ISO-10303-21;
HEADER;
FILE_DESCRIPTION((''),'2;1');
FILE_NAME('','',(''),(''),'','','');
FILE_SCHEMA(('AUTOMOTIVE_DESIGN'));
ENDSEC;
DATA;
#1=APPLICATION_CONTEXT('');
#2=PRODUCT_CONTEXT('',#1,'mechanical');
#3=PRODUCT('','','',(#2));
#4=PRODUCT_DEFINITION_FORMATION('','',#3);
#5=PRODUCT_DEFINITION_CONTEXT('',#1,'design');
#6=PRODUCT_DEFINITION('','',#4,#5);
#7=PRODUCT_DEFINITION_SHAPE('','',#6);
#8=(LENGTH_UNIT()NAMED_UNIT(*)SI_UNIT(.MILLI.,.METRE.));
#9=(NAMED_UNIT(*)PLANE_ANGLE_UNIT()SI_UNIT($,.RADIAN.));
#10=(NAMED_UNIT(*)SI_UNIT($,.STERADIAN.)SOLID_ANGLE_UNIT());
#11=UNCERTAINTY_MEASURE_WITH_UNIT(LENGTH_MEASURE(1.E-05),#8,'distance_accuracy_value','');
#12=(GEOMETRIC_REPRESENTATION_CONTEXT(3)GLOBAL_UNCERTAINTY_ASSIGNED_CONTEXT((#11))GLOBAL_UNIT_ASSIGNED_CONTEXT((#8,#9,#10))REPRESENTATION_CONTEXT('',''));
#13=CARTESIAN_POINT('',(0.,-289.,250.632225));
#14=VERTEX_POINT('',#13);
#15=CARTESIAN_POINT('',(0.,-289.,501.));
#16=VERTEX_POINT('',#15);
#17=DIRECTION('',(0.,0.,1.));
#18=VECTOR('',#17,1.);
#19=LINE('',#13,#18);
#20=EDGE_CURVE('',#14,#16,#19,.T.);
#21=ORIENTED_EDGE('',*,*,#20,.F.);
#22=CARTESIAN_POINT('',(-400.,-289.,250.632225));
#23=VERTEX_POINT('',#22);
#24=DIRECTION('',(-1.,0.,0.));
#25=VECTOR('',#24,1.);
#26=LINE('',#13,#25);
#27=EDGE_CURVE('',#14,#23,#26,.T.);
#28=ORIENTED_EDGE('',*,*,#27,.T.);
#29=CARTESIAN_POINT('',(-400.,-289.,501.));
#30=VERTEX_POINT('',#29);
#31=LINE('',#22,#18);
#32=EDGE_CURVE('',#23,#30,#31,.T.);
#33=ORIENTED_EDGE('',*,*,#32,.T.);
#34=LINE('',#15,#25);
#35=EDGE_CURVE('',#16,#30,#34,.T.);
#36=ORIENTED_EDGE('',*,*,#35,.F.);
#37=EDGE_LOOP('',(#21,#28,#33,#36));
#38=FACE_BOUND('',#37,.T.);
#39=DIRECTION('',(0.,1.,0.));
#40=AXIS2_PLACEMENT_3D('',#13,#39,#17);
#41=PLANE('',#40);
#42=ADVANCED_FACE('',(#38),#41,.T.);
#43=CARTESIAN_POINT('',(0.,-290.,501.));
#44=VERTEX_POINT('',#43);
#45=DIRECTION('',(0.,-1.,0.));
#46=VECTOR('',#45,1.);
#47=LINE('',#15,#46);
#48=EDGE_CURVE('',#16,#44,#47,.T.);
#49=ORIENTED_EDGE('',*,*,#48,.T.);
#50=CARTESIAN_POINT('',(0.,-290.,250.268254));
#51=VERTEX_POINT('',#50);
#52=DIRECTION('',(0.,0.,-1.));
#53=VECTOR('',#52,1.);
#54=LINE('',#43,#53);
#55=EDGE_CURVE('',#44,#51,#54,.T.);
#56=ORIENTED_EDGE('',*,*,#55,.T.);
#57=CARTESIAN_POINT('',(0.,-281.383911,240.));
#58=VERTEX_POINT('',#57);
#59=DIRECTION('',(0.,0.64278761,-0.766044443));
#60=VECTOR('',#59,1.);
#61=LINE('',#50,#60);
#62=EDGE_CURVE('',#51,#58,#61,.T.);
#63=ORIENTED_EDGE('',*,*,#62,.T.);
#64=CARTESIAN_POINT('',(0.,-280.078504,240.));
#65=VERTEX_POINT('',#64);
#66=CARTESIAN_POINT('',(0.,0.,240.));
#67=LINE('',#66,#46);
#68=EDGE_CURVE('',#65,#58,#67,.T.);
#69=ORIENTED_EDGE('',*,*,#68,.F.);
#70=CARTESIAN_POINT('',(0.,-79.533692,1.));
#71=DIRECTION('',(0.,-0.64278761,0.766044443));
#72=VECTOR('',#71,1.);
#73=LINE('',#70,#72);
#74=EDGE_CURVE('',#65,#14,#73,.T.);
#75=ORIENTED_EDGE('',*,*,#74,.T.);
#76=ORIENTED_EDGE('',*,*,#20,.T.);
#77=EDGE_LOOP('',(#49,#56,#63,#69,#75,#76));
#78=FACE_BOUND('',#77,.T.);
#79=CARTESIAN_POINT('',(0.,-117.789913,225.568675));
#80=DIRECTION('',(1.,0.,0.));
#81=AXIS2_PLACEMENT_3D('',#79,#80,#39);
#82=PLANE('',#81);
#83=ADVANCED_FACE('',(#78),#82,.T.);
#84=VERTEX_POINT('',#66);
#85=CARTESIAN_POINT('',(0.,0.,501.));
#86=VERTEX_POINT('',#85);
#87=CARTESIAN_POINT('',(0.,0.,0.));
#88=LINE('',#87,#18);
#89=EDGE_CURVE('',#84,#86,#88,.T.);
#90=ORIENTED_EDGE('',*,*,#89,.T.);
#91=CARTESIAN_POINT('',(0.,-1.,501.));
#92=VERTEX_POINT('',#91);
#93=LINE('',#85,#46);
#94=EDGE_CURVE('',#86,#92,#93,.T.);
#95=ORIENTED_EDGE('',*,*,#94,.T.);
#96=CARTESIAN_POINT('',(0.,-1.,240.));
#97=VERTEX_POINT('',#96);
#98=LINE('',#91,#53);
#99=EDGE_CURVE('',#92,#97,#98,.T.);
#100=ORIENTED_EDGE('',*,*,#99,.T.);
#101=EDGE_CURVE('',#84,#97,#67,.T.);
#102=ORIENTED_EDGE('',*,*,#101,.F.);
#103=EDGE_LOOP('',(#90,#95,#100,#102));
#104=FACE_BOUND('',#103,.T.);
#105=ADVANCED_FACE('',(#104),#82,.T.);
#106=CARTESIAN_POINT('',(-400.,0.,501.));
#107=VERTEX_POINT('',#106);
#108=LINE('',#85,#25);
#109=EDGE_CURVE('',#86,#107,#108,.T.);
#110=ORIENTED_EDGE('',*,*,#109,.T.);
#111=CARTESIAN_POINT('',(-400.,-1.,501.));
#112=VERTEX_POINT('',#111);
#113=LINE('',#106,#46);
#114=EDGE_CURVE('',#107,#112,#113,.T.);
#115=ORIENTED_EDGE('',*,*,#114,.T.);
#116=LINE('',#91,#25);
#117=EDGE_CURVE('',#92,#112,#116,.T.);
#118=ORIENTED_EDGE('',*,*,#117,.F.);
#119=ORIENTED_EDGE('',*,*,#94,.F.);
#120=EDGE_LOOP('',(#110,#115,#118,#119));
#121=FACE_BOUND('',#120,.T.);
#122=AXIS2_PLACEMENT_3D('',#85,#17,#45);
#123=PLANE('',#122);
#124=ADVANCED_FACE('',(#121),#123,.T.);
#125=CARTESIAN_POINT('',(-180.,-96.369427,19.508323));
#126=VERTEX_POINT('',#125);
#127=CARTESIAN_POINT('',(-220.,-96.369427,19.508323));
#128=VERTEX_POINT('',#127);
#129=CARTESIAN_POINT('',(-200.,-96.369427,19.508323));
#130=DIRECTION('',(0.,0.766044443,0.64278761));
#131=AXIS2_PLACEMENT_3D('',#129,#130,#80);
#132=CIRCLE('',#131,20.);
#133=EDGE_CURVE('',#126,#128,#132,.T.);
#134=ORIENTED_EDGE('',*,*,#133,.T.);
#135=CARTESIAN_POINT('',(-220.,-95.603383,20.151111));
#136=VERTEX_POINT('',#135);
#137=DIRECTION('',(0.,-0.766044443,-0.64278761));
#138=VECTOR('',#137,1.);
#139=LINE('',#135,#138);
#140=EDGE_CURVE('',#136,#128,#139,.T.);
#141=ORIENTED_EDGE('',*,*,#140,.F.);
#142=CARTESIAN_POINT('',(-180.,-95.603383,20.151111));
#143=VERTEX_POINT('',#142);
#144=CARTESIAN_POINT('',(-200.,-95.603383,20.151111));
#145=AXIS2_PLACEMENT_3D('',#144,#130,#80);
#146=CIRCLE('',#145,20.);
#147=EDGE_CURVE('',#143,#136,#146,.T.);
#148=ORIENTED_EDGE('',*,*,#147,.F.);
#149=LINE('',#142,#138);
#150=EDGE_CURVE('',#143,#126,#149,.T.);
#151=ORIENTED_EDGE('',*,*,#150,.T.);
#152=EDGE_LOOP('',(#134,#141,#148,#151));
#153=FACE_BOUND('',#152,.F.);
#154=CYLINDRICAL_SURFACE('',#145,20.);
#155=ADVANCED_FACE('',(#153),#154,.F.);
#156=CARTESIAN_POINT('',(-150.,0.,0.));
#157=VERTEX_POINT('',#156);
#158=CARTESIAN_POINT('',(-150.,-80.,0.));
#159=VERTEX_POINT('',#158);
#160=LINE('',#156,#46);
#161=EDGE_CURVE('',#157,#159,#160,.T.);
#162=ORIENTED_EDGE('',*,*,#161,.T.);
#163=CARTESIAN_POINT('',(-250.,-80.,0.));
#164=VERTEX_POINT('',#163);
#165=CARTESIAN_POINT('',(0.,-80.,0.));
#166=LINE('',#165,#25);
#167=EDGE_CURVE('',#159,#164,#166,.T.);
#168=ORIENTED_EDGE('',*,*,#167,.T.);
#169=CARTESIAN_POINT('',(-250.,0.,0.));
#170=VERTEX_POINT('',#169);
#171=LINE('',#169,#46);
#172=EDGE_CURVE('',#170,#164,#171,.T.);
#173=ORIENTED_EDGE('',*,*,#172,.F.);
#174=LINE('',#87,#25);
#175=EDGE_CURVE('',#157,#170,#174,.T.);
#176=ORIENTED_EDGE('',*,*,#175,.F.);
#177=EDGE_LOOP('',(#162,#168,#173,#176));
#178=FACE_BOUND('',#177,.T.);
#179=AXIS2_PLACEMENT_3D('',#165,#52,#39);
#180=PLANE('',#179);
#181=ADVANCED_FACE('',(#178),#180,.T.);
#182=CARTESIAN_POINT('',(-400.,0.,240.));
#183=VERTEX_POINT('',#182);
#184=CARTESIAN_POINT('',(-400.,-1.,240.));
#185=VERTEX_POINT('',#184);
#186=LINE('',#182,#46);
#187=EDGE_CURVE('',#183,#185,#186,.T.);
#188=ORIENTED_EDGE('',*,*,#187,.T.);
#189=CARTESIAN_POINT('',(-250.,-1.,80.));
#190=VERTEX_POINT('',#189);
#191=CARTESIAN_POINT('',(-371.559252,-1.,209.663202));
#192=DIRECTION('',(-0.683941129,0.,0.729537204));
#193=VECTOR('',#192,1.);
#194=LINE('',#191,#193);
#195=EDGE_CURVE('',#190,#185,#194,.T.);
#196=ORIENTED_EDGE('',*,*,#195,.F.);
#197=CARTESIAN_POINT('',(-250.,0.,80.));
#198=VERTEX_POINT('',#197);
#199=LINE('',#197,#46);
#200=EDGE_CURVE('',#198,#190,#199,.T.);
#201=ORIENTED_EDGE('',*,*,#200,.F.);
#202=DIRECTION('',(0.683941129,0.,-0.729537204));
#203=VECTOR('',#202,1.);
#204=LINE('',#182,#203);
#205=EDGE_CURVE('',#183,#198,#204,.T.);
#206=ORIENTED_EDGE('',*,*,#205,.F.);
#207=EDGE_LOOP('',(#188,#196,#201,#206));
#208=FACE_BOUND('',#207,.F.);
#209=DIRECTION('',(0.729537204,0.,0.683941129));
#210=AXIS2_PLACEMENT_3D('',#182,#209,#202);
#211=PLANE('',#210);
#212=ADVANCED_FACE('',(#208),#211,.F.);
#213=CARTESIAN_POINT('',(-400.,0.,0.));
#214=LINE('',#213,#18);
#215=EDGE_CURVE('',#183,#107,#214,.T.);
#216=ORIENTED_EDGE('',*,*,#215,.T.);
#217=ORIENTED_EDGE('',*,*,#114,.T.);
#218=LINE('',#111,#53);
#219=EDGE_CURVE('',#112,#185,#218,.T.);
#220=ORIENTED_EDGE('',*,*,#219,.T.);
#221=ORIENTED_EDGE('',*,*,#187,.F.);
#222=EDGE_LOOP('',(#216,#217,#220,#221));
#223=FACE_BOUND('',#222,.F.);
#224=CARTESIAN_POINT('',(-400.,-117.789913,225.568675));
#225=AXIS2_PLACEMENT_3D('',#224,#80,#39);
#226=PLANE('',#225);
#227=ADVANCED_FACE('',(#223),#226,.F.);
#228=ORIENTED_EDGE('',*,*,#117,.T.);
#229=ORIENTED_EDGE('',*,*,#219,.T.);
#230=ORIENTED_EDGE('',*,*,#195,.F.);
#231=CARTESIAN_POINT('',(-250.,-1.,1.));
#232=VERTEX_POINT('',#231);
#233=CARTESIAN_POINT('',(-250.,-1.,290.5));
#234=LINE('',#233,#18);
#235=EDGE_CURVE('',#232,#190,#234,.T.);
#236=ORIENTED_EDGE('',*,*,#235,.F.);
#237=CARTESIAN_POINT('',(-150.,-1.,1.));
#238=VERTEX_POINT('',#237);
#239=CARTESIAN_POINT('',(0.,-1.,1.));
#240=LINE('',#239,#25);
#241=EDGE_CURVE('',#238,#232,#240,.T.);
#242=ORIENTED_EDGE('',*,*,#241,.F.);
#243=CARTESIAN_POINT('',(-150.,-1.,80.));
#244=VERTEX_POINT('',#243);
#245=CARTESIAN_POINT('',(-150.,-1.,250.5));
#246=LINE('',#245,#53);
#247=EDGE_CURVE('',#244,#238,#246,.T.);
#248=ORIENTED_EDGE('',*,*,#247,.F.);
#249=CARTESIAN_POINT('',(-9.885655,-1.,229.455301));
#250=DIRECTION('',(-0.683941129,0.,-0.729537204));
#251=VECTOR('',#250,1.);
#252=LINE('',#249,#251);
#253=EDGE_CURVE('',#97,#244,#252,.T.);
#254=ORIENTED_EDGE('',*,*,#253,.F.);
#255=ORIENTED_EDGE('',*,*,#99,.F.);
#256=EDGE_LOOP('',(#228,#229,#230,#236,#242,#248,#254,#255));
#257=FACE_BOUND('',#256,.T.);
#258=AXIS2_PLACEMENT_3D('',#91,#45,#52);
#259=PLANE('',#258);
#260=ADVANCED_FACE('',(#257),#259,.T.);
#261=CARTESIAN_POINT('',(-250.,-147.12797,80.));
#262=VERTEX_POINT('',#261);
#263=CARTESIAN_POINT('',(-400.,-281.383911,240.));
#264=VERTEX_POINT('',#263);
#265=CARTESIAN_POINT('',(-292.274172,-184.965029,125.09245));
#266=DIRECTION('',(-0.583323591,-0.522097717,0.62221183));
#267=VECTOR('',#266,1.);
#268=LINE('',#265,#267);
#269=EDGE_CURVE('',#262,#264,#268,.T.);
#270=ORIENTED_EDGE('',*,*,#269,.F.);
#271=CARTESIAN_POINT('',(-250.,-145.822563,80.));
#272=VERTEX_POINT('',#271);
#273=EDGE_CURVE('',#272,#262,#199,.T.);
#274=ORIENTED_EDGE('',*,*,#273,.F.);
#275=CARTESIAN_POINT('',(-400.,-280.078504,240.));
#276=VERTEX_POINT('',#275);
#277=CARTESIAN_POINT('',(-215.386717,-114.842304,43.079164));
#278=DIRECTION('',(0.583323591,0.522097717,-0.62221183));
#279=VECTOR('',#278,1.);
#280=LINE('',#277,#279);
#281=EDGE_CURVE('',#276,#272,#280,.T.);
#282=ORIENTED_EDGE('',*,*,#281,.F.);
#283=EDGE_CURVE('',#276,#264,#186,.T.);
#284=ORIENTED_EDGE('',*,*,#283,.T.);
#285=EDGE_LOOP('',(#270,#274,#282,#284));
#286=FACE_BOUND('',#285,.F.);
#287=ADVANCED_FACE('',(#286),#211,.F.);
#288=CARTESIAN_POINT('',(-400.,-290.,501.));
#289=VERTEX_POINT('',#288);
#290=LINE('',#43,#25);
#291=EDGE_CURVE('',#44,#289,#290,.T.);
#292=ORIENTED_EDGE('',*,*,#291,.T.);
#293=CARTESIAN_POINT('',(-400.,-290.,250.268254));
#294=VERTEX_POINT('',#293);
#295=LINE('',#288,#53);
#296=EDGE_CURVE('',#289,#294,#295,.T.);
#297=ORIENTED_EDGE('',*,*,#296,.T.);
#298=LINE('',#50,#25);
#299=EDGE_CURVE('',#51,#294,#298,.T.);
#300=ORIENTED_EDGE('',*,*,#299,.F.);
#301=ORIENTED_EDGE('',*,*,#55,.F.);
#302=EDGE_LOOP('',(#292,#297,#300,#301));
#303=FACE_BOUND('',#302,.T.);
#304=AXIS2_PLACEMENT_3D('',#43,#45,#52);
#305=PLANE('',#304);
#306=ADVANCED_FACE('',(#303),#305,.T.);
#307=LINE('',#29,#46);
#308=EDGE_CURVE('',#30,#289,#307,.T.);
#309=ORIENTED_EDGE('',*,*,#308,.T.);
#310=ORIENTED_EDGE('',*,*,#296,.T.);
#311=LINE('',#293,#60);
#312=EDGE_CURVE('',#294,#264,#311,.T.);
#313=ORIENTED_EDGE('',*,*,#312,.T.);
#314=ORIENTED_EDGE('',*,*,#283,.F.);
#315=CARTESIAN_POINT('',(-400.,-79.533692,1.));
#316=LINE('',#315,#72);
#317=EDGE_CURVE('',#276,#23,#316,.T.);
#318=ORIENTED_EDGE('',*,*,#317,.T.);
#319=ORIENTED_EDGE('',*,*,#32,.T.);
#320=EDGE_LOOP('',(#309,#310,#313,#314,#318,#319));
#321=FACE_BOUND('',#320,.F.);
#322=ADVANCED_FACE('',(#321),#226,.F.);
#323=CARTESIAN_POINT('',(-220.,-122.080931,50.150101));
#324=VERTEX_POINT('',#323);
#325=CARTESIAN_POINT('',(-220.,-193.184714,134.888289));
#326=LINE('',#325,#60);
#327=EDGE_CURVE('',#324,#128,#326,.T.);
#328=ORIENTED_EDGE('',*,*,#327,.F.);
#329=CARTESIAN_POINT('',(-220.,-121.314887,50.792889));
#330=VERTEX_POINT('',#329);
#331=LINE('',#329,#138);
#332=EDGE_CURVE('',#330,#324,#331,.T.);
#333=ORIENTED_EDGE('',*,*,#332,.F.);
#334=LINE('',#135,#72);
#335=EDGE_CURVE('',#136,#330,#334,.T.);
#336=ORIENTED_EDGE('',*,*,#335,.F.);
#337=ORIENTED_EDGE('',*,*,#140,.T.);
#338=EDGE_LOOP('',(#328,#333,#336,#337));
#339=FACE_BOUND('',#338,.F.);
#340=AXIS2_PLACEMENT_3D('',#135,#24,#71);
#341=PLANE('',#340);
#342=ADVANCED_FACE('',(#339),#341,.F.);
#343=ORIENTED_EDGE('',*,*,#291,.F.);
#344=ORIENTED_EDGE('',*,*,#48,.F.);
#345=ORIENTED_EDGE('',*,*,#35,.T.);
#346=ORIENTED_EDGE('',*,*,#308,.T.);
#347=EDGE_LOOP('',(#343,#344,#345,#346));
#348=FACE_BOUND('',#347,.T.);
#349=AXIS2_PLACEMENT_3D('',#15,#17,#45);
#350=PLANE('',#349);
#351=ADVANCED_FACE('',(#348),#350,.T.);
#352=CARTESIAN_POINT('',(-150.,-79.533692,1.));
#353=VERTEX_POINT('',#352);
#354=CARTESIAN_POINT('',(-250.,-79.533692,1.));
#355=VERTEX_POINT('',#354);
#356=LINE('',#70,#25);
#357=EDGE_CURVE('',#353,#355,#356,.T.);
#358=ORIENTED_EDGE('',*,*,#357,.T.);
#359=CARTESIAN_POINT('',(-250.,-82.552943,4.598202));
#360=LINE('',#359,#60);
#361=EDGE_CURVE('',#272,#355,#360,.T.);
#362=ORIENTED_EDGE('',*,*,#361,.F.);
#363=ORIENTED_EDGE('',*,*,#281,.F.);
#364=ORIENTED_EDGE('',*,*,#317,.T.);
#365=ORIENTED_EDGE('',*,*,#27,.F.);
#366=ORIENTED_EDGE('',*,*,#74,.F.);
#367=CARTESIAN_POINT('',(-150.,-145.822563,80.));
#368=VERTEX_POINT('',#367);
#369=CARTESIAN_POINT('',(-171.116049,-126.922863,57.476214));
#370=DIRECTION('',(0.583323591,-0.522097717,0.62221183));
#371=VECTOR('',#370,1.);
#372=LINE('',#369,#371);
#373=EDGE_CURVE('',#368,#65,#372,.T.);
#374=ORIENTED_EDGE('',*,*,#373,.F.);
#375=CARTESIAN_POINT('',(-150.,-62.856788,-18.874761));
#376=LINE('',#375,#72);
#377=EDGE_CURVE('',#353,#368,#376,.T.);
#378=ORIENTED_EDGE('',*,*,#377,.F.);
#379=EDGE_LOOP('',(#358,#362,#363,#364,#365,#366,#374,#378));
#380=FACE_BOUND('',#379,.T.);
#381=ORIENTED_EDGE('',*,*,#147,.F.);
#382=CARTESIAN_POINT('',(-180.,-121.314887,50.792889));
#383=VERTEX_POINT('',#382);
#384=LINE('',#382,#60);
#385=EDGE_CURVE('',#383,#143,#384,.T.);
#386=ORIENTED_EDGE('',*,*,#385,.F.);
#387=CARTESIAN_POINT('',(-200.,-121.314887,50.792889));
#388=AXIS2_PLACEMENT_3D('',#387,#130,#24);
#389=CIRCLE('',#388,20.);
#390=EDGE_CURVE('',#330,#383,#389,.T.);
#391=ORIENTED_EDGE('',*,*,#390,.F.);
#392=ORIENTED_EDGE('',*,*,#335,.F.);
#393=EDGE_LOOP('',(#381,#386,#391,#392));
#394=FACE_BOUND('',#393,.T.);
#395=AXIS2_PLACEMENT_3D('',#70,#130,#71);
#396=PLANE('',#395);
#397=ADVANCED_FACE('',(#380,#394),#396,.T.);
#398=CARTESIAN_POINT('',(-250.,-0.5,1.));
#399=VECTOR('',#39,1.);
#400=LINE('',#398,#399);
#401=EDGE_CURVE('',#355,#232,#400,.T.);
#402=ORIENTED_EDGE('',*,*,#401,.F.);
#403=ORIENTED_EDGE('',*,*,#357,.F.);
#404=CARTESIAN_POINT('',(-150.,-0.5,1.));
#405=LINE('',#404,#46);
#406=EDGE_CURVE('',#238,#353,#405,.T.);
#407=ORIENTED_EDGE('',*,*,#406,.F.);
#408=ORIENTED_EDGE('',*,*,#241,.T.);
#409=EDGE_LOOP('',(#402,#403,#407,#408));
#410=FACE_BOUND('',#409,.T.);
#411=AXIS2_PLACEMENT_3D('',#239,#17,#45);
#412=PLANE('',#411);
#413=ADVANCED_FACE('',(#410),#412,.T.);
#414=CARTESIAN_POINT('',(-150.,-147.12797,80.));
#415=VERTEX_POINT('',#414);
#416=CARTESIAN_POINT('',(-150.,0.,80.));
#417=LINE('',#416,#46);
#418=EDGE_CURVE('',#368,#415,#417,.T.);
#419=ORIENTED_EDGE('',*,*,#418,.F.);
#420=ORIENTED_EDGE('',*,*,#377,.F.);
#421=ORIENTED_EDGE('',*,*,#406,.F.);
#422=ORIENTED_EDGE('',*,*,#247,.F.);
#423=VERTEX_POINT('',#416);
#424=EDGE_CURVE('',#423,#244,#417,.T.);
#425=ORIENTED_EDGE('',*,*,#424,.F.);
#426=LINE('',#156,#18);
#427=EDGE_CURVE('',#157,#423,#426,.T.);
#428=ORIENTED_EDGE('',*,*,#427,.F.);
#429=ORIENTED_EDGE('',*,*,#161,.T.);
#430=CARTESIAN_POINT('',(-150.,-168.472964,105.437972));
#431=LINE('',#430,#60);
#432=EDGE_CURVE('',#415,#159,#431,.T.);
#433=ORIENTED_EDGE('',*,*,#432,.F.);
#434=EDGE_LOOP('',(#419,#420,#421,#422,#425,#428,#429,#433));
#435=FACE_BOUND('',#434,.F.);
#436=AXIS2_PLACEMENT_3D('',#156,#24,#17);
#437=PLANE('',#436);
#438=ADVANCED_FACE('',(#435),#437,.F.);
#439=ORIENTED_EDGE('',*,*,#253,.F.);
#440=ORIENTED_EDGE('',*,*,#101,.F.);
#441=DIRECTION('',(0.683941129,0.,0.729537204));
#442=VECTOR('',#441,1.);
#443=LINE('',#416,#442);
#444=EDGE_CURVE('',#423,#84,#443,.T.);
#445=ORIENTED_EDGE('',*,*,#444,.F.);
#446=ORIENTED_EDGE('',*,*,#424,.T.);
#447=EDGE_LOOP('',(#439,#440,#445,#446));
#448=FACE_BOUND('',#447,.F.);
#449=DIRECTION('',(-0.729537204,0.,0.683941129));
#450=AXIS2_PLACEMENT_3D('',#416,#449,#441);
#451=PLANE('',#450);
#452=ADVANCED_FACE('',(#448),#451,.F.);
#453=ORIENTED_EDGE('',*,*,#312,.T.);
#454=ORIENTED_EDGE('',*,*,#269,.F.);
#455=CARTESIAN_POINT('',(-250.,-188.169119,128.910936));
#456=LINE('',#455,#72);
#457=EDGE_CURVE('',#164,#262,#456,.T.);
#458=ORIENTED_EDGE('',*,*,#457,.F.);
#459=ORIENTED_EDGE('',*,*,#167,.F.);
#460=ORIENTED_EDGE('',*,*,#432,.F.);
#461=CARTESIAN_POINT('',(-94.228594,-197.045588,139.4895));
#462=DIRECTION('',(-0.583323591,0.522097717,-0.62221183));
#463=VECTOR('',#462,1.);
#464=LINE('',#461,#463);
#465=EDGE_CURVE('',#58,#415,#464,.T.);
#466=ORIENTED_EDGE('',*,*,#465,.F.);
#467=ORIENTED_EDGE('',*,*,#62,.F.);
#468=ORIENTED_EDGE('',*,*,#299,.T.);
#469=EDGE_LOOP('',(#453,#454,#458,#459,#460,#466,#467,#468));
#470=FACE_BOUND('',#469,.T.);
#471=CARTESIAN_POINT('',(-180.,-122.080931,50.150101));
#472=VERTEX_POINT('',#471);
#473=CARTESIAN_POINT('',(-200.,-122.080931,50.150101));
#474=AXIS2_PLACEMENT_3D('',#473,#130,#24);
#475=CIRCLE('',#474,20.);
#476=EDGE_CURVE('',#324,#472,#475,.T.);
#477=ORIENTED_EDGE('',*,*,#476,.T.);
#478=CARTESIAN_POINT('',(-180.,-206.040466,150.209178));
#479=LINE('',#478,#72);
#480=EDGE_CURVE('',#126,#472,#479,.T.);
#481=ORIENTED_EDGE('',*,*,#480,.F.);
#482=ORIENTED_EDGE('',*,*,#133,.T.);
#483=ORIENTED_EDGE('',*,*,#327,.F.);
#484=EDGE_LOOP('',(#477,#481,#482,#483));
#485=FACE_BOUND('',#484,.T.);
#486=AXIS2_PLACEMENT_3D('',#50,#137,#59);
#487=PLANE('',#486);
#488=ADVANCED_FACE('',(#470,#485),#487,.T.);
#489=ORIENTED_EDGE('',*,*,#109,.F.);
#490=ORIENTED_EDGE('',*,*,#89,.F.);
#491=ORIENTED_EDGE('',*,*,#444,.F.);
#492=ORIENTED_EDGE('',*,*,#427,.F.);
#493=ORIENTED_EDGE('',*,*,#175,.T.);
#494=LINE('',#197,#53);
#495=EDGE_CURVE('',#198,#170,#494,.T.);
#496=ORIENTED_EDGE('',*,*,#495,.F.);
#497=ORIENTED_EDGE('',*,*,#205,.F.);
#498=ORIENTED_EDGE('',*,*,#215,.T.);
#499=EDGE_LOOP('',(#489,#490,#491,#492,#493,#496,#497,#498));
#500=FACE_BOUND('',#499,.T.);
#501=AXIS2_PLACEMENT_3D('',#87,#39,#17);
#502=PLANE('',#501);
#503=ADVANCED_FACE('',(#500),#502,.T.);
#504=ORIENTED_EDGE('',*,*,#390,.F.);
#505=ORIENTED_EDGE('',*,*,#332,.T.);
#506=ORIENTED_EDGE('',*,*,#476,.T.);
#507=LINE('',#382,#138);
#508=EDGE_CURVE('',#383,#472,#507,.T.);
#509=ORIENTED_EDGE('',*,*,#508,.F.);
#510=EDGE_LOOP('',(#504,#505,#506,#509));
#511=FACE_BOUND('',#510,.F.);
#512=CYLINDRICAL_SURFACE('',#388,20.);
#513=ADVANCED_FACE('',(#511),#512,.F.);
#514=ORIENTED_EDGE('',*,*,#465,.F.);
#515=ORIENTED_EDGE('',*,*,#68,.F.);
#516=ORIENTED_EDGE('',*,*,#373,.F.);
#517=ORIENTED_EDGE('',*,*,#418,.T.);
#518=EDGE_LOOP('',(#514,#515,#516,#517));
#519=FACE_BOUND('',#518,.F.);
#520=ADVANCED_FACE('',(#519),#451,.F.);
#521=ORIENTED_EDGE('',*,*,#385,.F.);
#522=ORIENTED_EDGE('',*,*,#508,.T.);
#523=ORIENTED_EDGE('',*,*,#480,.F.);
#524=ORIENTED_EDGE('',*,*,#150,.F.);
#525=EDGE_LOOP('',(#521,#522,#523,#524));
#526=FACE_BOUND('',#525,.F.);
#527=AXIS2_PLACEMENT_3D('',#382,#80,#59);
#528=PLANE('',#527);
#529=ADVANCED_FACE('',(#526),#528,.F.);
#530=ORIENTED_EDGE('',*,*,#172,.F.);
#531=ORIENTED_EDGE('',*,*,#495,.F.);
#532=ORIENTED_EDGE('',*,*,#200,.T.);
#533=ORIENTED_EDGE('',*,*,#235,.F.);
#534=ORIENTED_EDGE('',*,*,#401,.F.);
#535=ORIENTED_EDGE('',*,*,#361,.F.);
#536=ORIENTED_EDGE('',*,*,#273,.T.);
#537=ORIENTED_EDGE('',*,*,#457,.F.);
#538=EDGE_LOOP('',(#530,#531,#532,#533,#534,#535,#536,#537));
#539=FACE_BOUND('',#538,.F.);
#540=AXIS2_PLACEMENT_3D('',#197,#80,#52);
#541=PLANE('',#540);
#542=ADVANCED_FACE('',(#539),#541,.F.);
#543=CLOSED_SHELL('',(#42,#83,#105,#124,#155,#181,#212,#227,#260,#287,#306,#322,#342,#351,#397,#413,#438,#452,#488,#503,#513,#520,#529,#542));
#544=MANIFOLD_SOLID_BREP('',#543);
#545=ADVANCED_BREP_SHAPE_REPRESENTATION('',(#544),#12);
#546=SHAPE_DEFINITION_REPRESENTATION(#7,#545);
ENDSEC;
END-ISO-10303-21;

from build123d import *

# Parameters (mm, degrees)
F1_DEPTH = 400
F3_DEPTH = 290.001
F5_DEPTH = 161.870333055


# Not quite as in the source:
# - a feature names something its author has since deleted; it is built from what else it names


with BuildPart() as f1:
    # F0 (on Right) → F1 (new body)
    with BuildSketch(Plane.YZ):
        Polygon((-80, 0), (0, 0), (0, 501), (-1, 501), (-1, 1), (-79.5336923418, 1), (-289, 250.6322246791), (-289, 501), (-290, 501), (-290, 250.2682544448), align=None)
    extrude(amount=-F1_DEPTH)

    # F2 (on face) → F3 (cut, through all)
    with BuildSketch(Plane(origin=(0, 0, 0), x_dir=(-1, 0, 0), z_dir=(0, 1, 0))):
        Polygon((400, 0), (400, 240), (250, 80), (250, 0), align=None)
        Polygon((0, 0), (150, 0), (150, 80), (0, 240), align=None)
    extrude(amount=-F3_DEPTH, mode=Mode.SUBTRACT)

    # F4 (on face) → F5 (cut, through all)
    with BuildSketch(Plane(origin=(0, -46.1798826636, -38.7495225108), x_dir=(-1, 0, 0), z_dir=(0, 0.7660444431, 0.6427876097))):
        with BuildLine():
            Line((180, 116.8893164331), (180, 76.8893164331))
            ThreePointArc((180, 76.8893164331), (200, 56.8893164331), (220, 76.8893164331))
            Line((220, 76.8893164331), (220, 116.8893164331))
            ThreePointArc((220, 116.8893164331), (200, 136.8893164331), (180, 116.8893164331))
        make_face()
    extrude(amount=-F5_DEPTH, mode=Mode.SUBTRACT)


solid = f1.part
